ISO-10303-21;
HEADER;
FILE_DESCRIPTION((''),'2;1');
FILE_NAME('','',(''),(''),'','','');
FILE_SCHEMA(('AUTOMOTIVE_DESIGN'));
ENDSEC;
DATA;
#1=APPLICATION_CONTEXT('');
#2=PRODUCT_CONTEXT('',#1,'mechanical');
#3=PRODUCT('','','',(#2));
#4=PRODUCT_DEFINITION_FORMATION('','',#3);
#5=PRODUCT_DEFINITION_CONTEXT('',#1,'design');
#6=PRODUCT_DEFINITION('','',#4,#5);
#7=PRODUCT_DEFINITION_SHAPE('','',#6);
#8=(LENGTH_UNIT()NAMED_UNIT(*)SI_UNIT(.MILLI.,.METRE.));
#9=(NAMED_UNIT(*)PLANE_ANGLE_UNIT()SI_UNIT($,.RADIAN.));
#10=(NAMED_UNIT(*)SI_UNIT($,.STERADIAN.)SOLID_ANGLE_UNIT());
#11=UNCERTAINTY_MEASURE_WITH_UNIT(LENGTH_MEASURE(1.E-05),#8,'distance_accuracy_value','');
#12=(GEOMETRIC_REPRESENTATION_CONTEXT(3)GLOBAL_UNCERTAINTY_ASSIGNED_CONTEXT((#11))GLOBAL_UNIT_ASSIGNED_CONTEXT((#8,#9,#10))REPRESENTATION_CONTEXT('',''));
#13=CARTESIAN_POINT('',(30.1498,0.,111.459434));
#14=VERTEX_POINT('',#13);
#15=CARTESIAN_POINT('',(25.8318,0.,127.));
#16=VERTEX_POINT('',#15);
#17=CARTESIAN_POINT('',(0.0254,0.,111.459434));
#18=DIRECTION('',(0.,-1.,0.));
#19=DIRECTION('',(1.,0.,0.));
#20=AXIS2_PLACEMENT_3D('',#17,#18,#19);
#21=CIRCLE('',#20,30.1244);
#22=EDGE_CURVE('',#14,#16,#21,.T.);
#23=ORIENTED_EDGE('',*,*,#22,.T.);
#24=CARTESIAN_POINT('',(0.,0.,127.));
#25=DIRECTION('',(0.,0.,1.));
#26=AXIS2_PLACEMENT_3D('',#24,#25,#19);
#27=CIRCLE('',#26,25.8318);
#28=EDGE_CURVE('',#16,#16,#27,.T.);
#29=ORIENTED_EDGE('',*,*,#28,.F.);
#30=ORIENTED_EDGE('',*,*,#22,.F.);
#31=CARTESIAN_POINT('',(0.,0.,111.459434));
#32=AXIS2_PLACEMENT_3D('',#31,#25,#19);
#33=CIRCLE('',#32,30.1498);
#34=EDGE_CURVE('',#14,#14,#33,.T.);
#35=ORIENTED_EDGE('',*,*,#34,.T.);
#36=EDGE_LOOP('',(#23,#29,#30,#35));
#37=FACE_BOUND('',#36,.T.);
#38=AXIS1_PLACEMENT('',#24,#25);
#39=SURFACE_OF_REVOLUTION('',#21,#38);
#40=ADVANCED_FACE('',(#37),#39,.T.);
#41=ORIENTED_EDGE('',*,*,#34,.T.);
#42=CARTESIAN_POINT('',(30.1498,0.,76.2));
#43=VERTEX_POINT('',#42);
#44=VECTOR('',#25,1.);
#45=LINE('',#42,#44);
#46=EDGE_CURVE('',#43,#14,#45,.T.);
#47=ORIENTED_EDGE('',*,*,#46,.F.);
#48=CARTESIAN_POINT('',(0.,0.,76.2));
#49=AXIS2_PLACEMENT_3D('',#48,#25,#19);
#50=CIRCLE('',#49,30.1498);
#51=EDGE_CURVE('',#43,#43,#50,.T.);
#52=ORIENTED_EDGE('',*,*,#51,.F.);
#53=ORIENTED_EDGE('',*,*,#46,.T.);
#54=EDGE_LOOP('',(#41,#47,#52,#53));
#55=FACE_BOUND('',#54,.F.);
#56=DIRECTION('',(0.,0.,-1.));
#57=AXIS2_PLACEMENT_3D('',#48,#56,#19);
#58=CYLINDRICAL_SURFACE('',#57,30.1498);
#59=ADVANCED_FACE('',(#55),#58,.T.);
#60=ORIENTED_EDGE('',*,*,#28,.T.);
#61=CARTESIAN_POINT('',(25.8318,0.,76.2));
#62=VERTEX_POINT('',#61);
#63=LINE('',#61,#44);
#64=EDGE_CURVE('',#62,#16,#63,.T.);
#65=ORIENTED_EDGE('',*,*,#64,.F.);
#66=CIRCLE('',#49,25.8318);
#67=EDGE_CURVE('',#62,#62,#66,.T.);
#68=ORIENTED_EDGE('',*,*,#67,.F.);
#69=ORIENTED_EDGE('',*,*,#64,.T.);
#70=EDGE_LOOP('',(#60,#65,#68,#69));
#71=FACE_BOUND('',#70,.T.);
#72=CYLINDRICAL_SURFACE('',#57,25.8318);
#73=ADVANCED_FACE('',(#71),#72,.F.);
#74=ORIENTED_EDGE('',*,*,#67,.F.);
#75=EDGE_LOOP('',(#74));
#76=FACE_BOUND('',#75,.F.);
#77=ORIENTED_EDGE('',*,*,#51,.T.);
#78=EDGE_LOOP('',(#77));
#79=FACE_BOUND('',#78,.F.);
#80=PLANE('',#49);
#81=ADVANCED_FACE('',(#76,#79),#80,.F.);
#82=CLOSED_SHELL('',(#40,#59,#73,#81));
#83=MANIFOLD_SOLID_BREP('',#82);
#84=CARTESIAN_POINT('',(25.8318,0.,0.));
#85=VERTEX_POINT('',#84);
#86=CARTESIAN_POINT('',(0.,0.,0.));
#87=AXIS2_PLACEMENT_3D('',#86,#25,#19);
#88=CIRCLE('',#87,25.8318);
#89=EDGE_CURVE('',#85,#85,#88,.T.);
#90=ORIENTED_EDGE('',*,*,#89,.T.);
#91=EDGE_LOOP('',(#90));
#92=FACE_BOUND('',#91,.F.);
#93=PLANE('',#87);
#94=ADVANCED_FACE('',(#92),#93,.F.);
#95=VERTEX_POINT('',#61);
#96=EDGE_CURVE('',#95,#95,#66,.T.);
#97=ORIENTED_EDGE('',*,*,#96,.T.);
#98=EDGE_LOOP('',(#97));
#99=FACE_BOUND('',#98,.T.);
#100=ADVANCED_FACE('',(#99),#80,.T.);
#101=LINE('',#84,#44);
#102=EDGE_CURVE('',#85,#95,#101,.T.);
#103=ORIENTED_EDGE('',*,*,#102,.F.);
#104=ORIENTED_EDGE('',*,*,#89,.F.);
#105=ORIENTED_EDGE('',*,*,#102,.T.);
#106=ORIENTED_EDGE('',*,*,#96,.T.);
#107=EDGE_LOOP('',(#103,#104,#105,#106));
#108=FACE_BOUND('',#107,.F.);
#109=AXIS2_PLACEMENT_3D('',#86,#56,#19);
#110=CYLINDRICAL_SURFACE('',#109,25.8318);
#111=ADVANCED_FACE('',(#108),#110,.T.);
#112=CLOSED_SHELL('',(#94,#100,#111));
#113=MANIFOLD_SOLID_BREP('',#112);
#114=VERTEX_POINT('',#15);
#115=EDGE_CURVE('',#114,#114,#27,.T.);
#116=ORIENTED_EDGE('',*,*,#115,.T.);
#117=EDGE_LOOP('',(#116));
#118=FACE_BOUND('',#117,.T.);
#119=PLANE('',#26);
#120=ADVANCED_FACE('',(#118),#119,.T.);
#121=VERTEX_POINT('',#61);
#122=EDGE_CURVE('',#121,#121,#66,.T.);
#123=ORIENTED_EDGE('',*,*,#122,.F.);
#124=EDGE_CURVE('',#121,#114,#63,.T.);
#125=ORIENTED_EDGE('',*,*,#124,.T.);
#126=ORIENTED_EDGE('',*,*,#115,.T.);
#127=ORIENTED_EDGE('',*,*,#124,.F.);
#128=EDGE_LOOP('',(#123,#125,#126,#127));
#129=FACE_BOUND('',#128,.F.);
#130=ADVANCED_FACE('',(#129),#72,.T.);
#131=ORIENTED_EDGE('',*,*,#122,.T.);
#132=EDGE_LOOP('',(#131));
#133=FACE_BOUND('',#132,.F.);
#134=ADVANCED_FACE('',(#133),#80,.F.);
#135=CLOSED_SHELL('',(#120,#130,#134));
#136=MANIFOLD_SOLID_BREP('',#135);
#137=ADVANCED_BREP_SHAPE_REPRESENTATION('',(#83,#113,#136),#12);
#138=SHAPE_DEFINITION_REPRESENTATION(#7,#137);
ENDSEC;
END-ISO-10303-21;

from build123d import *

# Parameters (mm, degrees)
F0_R     = 25.8318
F1_DEPTH = 76.2
F2_R     = 30.1498
F2_R_2   = 25.8318
F3_DEPTH = 50.8
F4_DEPTH = 50.8


# Not quite as in the source:
# - a fillet or chamfer that OpenCascade refuses, or shapes differently, is made with other operations: its cross-section is extruded or revolved along the edge and cut away or added


with BuildPart() as f1:
    # F0 (on Top) → F1 (new body)
    with BuildSketch(Plane.XY):
        Circle(F0_R)
    extrude(amount=F1_DEPTH)


with BuildPart() as f3:
    # F2 (on face) → F3 (new body)
    with BuildSketch(Plane.XY.offset(76.2)):
        Circle(F2_R)
        Circle(F2_R_2, mode=Mode.SUBTRACT)
    extrude(amount=F3_DEPTH)

    # F5: fillet of radius 30.1244 on 1 edges, made by hand

    # F5_s1 → F5_t2 (revolve, cut)
    with BuildSketch(Plane.XZ):
        with BuildLine():
            ThreePointArc((30.1498, 111.4594339099), (29.0502323985, 119.5240839085), (25.8318, 127))
            Line((25.8318, 127), (30.1498, 127))
            Line((30.1498, 127), (30.1498, 111.4594339099))
        make_face()
    revolve(axis=Axis((0, 0, 127), (0, 0, 1)), mode=Mode.SUBTRACT)


with BuildPart() as f4:
    # F4 (new): a face of the model
    f4_faces = [f1.part.faces().sort_by_distance(p)[0] for p in [
        (0, 0, 76.2),
    ]]
    extrude(f4_faces, amount=F4_DEPTH)


solid = Compound([f1.part, f3.part, f4.part])
